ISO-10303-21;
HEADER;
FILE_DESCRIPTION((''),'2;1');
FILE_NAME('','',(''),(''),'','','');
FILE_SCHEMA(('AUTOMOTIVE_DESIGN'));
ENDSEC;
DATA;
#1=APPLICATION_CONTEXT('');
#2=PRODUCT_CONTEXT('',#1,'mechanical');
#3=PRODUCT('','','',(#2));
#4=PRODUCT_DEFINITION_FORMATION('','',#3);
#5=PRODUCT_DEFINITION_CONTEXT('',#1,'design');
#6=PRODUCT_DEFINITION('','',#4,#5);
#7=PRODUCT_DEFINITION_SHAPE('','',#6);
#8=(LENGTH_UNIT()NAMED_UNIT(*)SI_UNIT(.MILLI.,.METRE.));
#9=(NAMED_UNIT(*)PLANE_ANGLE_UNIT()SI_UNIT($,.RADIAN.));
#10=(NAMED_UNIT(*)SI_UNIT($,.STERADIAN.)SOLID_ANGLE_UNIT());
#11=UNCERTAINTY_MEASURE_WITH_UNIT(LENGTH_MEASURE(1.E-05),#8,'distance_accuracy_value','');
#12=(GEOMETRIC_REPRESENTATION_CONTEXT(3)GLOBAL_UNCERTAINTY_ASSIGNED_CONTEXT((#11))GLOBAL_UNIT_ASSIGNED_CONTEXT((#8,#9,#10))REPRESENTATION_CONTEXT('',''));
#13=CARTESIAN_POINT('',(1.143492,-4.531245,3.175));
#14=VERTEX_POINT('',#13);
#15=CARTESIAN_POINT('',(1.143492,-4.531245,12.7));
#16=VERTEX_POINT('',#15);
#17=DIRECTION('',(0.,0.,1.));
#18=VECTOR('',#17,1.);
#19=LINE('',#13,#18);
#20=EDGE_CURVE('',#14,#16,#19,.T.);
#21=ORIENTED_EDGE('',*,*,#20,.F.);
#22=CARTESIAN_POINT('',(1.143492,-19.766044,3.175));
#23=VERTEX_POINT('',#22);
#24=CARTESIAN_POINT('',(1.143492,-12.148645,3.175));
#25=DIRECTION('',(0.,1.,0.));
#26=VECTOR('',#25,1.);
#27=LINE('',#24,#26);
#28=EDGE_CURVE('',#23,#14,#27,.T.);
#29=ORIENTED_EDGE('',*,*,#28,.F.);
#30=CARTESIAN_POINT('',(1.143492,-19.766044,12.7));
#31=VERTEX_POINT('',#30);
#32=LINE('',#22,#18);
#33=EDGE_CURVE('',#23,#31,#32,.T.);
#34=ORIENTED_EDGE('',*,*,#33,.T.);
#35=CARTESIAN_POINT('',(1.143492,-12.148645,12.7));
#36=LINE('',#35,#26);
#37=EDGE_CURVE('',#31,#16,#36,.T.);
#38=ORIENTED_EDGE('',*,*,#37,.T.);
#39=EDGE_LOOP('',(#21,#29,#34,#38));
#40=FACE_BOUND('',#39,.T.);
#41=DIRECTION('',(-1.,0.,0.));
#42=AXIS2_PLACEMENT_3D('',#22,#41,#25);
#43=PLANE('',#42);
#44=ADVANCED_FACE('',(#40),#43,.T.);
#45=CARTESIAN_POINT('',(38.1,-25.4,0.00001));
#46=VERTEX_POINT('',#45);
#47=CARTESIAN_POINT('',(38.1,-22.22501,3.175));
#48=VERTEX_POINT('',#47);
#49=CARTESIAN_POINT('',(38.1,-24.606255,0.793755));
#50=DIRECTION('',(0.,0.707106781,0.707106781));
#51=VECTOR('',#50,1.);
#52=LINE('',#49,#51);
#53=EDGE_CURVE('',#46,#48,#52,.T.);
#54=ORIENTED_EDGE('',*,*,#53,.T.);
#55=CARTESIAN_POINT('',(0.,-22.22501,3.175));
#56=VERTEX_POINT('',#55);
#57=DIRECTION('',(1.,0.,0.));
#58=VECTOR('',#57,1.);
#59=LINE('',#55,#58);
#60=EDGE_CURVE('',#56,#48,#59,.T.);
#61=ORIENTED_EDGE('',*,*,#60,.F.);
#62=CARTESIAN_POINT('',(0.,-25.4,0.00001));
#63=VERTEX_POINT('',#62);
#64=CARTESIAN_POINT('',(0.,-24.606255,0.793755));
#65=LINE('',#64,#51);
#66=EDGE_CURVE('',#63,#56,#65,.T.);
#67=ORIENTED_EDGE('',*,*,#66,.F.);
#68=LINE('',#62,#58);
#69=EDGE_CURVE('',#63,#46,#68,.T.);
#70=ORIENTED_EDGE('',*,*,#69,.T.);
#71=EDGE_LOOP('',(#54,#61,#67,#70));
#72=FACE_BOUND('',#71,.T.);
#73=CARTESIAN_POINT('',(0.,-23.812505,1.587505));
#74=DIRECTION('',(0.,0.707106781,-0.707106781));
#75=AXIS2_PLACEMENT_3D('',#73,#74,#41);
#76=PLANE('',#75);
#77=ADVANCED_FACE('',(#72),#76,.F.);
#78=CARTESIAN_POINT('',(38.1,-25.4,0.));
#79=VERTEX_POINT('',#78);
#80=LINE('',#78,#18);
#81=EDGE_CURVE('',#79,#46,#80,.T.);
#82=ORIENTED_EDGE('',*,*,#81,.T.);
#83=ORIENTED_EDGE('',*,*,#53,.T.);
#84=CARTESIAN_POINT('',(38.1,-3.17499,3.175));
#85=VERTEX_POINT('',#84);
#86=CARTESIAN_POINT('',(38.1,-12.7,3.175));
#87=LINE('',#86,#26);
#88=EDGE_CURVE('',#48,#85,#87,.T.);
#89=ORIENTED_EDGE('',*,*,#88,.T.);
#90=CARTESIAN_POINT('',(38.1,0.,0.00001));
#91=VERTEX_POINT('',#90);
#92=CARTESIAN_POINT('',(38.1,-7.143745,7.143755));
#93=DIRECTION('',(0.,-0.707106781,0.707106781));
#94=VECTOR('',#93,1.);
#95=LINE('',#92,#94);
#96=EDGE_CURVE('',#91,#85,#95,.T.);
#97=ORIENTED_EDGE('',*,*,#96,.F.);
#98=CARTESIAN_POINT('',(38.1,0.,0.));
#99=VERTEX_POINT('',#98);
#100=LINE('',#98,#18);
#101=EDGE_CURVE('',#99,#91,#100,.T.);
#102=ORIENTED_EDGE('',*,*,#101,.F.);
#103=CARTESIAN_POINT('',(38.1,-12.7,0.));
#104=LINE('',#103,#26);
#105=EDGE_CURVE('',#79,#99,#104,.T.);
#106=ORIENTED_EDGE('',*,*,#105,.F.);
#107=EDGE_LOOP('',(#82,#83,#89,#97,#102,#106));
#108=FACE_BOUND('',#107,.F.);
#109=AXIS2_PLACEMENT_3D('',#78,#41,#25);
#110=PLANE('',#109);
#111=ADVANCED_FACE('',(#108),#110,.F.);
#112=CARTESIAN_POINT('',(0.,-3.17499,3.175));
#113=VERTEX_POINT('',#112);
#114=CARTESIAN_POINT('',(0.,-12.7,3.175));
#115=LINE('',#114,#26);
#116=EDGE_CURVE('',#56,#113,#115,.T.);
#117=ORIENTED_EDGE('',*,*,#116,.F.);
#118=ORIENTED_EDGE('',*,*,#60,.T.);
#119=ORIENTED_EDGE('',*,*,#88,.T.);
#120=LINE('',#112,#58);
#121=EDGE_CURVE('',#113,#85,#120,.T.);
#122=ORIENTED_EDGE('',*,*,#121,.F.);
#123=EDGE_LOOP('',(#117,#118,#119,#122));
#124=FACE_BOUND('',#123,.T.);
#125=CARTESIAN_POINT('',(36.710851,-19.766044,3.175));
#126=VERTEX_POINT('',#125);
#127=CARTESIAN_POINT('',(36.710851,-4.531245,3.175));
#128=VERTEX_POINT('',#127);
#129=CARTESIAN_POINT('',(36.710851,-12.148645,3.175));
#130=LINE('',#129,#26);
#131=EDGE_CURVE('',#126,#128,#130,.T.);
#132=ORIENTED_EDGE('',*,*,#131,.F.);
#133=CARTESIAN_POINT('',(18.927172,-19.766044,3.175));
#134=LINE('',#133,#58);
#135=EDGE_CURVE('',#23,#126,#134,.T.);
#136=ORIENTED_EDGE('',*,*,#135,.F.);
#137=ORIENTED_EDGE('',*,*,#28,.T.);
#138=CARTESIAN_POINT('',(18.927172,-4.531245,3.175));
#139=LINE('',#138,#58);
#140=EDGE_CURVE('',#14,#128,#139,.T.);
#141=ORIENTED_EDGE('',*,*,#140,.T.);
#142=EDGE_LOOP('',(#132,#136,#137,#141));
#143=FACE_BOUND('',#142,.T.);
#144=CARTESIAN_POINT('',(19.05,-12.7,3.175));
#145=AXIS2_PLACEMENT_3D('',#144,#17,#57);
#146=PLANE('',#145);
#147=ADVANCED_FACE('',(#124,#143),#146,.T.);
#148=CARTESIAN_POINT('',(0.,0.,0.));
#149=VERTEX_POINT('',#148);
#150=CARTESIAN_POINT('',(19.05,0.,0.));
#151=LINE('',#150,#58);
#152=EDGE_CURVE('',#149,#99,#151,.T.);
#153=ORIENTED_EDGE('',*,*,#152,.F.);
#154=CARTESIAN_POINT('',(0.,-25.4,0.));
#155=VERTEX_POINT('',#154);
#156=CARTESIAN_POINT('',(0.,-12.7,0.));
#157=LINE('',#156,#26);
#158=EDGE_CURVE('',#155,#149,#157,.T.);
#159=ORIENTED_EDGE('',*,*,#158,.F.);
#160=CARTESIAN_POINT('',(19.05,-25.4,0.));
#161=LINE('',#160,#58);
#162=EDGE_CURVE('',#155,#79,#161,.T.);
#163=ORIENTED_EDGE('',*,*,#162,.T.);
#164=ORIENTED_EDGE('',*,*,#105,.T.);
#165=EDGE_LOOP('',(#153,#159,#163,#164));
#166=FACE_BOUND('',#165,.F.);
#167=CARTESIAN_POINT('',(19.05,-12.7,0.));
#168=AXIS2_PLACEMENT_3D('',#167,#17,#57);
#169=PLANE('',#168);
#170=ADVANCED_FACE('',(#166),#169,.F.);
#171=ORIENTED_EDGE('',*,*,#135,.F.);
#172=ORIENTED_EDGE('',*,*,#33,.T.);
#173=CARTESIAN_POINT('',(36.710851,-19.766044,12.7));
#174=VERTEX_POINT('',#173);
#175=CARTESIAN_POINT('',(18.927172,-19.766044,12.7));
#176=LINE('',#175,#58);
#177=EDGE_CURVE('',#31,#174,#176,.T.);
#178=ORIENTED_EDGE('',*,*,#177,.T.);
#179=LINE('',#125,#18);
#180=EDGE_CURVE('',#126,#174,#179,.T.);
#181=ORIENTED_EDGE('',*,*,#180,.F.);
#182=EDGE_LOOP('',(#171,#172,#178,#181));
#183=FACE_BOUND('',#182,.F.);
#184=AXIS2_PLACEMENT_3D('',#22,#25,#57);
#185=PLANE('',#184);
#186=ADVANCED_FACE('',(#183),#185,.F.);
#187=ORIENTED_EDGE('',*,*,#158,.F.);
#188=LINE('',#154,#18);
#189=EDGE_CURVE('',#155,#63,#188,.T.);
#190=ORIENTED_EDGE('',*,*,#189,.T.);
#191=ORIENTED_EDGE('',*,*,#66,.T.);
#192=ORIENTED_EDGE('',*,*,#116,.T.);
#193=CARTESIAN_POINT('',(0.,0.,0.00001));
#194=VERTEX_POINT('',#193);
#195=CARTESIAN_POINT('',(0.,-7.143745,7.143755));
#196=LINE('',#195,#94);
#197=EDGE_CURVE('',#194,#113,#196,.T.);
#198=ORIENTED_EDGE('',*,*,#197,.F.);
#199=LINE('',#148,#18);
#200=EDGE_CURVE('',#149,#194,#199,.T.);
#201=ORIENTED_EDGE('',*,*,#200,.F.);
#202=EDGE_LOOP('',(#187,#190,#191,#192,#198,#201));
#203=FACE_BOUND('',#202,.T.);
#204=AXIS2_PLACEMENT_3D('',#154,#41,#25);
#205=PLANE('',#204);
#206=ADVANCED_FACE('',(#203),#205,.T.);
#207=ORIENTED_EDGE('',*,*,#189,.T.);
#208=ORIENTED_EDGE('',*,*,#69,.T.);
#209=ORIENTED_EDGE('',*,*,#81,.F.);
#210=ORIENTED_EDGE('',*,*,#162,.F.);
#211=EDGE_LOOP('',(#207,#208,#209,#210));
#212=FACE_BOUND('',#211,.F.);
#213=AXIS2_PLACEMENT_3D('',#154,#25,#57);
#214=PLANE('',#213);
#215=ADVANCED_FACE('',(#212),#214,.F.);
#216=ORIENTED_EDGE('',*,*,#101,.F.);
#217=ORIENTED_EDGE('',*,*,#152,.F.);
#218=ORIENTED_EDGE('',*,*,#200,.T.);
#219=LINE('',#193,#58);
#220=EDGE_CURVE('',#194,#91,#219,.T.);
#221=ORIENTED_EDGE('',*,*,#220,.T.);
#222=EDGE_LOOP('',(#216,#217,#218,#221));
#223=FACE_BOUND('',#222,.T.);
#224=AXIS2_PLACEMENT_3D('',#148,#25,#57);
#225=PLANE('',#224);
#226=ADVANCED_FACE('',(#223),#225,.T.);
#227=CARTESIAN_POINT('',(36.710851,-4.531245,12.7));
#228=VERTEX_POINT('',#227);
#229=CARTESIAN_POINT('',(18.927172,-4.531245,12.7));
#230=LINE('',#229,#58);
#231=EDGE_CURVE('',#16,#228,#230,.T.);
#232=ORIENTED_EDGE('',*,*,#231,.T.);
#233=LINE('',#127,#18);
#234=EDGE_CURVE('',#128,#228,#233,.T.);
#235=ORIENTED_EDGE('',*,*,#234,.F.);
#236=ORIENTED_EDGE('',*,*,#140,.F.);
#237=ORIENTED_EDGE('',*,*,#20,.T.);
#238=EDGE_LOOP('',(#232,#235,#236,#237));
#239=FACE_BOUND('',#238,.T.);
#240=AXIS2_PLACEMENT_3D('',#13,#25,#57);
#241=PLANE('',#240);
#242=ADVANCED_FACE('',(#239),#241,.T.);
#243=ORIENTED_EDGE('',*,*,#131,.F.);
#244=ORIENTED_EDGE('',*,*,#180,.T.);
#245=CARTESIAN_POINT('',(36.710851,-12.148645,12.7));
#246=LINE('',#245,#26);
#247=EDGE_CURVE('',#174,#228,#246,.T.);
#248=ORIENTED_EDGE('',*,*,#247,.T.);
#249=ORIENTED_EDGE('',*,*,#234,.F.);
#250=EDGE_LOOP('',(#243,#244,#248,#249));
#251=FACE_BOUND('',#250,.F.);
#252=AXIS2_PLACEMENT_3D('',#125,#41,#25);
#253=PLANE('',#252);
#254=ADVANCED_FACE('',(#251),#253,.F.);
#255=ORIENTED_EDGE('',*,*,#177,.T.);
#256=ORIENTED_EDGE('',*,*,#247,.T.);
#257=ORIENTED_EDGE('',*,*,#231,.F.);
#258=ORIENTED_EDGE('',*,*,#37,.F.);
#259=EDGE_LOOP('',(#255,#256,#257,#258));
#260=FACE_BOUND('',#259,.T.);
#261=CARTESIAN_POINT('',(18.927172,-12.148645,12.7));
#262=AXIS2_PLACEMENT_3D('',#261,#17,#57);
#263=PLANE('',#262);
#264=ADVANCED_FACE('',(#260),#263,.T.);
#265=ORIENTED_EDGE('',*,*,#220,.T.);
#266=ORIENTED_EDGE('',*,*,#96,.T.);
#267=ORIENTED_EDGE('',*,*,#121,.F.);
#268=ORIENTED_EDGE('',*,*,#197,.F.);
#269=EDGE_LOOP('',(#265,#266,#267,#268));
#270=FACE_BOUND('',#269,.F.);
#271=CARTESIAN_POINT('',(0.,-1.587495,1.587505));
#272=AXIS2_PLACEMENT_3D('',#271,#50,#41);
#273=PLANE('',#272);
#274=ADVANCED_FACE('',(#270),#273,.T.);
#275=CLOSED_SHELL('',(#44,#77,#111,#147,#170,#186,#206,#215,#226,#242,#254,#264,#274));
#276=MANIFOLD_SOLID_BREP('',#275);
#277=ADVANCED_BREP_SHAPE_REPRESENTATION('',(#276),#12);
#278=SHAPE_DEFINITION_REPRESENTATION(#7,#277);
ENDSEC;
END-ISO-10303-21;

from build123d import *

# Parameters (mm, degrees)
F0_W     = 38.1
F0_H     = 25.4
F1_DEPTH = 3.175
F2_SIZE  = 3.17499
F3_W     = 35.5673587183
F3_H     = 15.2347986586
F4_DEPTH = 9.525


# Not quite as in the source:
# - a fillet or chamfer is up to 0.001 mm smaller than in the source, because OpenCascade refuses the exact size


with BuildPart() as f1:
    # F0 (on Top) → F1 (new body)
    with BuildSketch(Plane.XY):
        with Locations((19.05, -12.7)):
            Rectangle(F0_W, F0_H)
    extrude(amount=F1_DEPTH)

    # F2 (size 3.175 in the source; OpenCascade refuses exactly that, so slightly less here)
    f2_edges = [f1.edges().sort_by_distance(p)[0] for p in [
        (19.05, -25.4, 3.175),
        (19.05, 0, 3.175),
    ]]
    chamfer(f2_edges, length=F2_SIZE)

    # F3 (on face) → F4 (join)
    with BuildSketch(Plane.XY.offset(3.175)):
        with Locations((18.9271715353, -12.1486445423)):
            Rectangle(F3_W, F3_H)
    extrude(amount=F4_DEPTH)


solid = f1.part
